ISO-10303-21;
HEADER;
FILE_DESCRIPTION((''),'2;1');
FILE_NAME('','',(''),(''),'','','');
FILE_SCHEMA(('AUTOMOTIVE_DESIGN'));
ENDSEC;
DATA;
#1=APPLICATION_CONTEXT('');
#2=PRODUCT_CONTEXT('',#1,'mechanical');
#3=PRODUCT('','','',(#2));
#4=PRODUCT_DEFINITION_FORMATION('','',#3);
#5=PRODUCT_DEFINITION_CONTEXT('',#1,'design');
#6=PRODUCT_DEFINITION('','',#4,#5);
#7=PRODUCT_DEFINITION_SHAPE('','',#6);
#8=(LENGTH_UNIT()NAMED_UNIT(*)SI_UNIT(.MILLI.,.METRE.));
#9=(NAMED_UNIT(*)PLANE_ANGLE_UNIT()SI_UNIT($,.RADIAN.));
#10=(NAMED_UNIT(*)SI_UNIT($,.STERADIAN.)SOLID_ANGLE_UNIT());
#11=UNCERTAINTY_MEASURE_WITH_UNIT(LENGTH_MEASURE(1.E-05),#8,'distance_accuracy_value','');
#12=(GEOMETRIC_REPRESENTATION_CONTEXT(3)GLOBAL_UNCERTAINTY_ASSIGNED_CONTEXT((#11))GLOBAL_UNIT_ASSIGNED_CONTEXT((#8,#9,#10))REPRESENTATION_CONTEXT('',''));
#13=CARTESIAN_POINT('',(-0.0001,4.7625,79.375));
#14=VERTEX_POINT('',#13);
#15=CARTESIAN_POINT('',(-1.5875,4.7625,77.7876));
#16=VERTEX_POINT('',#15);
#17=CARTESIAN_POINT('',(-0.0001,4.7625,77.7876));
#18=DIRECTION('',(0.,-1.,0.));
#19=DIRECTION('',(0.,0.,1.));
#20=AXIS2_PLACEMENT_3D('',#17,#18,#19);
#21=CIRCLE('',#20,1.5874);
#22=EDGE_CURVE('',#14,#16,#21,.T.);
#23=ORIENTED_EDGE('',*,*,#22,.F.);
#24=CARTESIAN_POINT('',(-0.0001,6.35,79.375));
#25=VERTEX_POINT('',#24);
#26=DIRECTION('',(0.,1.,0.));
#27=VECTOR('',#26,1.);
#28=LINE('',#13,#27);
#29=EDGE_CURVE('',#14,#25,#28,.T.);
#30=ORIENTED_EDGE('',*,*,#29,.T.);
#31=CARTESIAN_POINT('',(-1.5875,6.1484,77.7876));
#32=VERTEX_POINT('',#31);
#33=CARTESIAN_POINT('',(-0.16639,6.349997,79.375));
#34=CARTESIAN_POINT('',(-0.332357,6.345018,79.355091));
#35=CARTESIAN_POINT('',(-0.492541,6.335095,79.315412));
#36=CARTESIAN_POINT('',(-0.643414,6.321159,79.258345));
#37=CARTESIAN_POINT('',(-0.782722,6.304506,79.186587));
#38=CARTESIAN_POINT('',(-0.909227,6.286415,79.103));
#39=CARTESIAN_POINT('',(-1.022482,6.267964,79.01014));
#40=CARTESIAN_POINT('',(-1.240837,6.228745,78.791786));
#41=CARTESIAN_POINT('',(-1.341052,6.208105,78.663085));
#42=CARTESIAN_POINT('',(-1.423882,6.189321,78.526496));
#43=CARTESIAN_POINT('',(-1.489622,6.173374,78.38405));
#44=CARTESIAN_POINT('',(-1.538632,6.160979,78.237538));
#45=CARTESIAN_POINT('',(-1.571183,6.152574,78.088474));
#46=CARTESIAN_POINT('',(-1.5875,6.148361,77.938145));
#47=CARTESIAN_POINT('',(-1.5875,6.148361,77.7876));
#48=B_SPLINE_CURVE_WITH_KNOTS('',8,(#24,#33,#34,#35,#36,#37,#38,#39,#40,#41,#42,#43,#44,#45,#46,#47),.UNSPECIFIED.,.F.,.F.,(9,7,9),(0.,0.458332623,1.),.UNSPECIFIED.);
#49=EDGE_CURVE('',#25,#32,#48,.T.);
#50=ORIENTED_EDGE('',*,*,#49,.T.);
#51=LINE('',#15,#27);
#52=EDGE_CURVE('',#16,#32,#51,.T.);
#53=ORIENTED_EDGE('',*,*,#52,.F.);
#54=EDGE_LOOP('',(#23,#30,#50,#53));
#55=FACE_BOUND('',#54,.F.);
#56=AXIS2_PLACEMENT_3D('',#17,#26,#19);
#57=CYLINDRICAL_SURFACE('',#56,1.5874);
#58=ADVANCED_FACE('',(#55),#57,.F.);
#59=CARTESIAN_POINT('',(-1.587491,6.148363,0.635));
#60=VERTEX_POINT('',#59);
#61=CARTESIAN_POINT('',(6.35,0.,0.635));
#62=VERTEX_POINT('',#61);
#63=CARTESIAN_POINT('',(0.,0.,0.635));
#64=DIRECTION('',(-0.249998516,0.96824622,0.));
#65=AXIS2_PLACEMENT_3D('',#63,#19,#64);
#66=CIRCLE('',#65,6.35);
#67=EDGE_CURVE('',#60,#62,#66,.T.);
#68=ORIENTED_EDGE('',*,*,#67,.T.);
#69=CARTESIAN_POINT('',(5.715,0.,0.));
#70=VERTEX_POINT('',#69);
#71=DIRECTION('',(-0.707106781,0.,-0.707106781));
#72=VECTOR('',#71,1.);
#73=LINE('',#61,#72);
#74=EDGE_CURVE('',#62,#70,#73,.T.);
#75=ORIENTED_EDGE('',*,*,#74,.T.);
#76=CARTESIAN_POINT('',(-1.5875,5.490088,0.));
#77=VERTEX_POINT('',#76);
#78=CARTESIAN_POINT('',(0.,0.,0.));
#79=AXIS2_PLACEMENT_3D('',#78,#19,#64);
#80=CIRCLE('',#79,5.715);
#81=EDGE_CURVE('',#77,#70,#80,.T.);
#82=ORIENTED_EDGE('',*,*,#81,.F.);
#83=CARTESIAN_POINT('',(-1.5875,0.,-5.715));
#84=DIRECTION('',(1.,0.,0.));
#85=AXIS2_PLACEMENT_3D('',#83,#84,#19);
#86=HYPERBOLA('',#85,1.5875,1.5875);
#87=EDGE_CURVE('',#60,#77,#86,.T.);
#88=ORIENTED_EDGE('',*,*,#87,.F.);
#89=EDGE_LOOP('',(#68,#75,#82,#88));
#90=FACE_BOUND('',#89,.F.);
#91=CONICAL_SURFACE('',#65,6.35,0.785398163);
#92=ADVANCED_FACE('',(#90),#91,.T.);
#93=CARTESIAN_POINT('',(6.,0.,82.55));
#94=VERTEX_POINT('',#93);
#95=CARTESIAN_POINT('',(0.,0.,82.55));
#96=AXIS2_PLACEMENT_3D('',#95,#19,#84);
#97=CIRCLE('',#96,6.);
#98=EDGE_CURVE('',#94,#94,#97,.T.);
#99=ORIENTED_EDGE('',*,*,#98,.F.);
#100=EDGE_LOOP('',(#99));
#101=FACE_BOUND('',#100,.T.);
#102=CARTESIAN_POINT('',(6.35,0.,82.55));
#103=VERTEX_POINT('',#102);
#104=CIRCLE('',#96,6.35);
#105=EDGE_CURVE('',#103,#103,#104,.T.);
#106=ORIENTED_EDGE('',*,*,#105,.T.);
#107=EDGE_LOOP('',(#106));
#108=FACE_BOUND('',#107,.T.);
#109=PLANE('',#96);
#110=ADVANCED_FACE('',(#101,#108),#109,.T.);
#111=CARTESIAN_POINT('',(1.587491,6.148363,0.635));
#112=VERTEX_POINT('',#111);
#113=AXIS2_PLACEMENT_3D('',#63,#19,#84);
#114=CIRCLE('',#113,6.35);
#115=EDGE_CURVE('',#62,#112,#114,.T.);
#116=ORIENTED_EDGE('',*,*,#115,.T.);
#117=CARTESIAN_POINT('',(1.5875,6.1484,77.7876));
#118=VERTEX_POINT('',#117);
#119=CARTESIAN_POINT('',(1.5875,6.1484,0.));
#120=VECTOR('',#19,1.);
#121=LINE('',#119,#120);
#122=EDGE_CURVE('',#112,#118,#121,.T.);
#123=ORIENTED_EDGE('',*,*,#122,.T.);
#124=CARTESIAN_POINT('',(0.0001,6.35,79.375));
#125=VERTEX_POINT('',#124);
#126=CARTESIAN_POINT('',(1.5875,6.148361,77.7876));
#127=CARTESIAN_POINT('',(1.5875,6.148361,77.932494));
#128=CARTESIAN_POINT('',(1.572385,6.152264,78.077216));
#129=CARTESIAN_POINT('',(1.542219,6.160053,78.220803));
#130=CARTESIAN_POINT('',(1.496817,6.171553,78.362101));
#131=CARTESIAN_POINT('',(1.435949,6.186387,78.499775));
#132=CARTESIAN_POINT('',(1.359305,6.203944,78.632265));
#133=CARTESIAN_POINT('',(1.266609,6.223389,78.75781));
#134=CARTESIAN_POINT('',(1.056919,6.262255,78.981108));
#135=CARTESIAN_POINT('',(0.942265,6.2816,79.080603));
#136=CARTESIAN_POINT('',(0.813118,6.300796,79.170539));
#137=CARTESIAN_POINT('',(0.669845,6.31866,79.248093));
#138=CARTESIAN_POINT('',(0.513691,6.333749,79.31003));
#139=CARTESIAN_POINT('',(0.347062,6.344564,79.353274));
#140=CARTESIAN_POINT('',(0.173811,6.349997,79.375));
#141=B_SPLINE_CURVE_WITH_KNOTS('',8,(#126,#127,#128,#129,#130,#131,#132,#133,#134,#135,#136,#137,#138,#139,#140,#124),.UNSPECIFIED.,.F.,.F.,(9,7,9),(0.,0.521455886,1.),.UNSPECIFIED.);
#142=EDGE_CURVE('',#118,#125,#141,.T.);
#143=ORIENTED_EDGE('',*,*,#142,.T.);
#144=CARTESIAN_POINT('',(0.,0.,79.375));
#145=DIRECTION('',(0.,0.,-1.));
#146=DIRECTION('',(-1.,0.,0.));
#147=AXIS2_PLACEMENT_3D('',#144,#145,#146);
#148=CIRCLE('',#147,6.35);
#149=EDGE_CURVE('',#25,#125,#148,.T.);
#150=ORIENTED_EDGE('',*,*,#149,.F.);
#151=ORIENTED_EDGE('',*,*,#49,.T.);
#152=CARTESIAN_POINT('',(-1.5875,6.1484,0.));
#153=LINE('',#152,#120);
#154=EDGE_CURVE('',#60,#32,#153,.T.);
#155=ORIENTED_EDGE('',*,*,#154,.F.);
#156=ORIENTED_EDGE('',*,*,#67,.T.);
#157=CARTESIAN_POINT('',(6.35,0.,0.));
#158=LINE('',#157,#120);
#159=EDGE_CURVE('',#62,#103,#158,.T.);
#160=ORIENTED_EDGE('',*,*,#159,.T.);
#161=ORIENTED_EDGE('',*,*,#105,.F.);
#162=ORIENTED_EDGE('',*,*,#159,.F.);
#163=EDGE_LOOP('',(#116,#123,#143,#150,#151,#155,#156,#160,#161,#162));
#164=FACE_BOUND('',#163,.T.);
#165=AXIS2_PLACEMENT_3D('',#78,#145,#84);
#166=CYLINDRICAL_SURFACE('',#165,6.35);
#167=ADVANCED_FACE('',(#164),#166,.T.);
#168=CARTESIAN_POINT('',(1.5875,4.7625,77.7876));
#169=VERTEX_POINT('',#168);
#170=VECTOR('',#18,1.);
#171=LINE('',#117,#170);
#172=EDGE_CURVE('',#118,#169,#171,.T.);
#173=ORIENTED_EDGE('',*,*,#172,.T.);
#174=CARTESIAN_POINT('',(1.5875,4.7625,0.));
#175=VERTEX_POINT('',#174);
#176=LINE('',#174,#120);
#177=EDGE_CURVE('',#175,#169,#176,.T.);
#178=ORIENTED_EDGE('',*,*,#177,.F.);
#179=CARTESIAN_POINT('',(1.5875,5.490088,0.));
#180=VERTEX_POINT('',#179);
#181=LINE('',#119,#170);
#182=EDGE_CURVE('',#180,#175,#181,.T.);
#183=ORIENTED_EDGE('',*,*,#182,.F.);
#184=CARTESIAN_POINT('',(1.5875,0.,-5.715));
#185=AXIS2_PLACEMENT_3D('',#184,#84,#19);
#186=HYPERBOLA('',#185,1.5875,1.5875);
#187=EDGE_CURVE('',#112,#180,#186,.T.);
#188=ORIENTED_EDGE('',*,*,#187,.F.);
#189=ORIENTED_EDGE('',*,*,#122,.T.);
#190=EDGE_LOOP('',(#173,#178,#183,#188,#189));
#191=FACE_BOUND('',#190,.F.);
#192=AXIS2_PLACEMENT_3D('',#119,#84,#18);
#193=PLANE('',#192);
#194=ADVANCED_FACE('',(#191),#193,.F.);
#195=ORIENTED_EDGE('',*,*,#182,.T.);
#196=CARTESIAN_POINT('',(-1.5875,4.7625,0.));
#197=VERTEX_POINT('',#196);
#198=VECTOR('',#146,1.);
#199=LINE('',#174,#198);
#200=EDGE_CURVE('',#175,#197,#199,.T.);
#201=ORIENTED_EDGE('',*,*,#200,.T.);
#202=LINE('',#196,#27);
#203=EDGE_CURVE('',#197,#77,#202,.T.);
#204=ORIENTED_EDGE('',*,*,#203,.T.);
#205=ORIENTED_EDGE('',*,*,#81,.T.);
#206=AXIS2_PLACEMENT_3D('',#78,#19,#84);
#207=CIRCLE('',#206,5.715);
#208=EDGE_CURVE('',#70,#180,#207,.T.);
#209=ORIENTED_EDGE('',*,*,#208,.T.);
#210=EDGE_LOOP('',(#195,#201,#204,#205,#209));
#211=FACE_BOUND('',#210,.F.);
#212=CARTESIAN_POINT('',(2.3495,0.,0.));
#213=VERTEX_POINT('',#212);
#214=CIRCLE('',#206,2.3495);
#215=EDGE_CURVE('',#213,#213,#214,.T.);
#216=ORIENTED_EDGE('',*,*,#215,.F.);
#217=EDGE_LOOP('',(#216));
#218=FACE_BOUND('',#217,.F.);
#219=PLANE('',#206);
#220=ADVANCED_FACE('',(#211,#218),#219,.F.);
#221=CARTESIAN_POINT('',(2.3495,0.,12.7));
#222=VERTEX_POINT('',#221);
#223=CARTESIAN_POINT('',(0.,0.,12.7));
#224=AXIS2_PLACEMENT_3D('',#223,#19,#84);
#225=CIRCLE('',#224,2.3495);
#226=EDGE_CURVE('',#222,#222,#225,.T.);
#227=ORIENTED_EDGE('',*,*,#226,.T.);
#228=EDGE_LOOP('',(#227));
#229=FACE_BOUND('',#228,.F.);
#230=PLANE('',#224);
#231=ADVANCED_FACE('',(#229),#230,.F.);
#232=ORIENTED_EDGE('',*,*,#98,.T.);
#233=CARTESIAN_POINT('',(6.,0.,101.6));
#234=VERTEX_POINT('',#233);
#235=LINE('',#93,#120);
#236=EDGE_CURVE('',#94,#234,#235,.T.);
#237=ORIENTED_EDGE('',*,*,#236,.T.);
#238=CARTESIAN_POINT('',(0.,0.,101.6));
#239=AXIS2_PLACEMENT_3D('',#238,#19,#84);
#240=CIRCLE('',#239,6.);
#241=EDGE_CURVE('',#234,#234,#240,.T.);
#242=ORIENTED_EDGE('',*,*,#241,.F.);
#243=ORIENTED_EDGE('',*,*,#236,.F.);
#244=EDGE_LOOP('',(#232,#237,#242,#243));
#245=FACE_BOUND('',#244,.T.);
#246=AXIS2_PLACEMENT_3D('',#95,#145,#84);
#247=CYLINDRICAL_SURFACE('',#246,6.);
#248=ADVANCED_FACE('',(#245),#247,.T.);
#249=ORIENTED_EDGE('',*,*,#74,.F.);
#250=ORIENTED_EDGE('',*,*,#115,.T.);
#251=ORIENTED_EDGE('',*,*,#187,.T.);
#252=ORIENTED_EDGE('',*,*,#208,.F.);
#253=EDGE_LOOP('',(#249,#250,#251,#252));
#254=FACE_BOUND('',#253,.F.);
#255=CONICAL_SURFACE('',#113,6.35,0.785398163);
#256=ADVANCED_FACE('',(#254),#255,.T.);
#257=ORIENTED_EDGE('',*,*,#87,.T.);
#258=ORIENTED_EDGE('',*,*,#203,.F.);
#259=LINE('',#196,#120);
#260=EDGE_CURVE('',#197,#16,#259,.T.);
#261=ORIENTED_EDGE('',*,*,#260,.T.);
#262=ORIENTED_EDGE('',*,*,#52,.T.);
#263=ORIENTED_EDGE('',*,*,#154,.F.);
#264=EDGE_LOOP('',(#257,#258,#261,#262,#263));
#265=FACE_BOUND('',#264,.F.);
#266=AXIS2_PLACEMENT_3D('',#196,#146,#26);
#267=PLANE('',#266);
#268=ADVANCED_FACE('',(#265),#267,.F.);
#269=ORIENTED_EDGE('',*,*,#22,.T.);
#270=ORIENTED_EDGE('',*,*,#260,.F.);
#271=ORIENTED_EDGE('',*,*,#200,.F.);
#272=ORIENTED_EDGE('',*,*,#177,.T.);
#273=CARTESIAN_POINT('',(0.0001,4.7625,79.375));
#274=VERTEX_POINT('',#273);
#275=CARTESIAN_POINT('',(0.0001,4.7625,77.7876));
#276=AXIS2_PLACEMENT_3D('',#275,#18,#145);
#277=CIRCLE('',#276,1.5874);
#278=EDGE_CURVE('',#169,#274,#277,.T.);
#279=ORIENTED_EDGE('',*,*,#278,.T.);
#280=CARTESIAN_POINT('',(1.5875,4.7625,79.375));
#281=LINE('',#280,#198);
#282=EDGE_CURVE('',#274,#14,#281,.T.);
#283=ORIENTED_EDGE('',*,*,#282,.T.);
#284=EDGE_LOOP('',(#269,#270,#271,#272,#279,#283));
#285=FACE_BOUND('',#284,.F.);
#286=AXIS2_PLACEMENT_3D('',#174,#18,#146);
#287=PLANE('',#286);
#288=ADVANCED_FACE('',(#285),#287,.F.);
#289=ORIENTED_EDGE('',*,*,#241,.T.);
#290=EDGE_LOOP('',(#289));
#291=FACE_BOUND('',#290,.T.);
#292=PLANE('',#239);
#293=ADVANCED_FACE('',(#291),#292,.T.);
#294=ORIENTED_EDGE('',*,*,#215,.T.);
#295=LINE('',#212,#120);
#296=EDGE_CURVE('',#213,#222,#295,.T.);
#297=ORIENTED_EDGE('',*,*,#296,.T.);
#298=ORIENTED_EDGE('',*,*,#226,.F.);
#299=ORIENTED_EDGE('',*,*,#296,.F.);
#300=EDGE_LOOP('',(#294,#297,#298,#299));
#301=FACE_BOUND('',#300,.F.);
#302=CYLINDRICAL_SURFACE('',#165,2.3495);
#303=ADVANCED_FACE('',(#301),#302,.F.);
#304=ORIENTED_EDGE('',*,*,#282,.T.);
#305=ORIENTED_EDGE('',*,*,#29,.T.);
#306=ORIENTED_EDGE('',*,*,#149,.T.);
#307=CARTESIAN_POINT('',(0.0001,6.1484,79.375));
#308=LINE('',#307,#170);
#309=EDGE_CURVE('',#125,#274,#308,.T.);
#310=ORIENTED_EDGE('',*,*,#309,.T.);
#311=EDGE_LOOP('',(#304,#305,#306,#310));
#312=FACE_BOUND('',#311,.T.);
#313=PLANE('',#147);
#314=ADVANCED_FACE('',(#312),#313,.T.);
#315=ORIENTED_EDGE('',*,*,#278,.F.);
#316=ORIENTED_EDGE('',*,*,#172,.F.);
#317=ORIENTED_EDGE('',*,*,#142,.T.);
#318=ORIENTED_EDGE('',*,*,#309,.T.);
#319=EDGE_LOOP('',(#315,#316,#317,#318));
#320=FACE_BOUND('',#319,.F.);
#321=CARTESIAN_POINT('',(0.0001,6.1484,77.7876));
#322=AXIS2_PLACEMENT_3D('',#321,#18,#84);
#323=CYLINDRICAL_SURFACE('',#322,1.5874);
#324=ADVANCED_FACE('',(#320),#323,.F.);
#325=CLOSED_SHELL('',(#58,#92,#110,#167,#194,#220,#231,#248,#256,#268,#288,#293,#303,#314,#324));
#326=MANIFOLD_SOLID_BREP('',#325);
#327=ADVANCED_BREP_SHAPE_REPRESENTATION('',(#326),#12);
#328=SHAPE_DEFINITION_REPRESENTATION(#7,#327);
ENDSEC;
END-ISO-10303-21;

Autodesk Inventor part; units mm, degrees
ref_plane "YZ Plane" through (0, 0, 0) normal (1, 0, 0) x (0, 1, 0)
ref_plane "XZ Plane" through (0, 0, 0) normal (0, 1, 0) x (-1, 0, 0)
ref_plane "XY Plane" through (0, 0, 0) normal (0, 0, 1) x (1, 0, 0)
sketch "Sketch1" plane through (0, 0, 0) normal (0, 0, 1) x (1, 0, 0)
  circle A0 centre (0, 0) radius 6.35
  circle A1 centre (0, 0) radius 2.3495
  dimension "d0" = 12.7
  dimension "d2" = 4.699
extrude "Extrusion1" add sketch "Sketch1" along normal blind 82.55 contours A0 | A1
extrude "Extrusion2" cut sketch "Sketch1" along normal blind 12.7 contours A1
sketch "Sketch2" plane through (0, 0, 82.55) normal (0, 0, 1) x (1, 0, 0)
  circle A0 centre (0, 0) radius 6.35 projected
  circle A1 centre (0, 0) radius 6
  dimension "d7" = 12
extrude "Extrusion3" add sketch "Sketch2" along normal blind 19.05 contours A1
sketch "Sketch3" plane through (0, 0, 0) normal (0, 0, -1) x (-1, 0, 0)
  circle A0 centre (0, 0) radius 6.35 projected
  line L0 (-1.5875, 6.1484) -> (-1.5875, 4.7625)
  line L1 (-1.5875, 4.7625) -> (1.5875, 4.7625)
  line L2 (1.5875, 4.7625) -> (1.5875, 6.1484)
  line L3 (0, 0) -> (0, 6.35) construction
  point P0 (0, 4.7625)
  dimension "d11" = 3.175
  dimension "d13" = 1.5875
extrude "Extrusion4" cut sketch "Sketch3" against normal blind 79.375 contours L2 L1 L0 A0 picked at (0.1781, 5.2842)
fillet "Fillet1" radius 1.5875 2 edges at (-1.5875, 5.4554, 79.375) (1.5875, 5.4554, 79.375)
chamfer "Chamfer1" distance 0.635 angle 45 2 edges at (5.0201, 3.8886, 0) (-3.8886, -5.0201, 0)
thread "Thread1" size "10-32 UNF" class "2B" standard "ANSI Unified Screw Threads" full length
properties part number "P80 Shaft (3.25 inch)" material "Steel"
